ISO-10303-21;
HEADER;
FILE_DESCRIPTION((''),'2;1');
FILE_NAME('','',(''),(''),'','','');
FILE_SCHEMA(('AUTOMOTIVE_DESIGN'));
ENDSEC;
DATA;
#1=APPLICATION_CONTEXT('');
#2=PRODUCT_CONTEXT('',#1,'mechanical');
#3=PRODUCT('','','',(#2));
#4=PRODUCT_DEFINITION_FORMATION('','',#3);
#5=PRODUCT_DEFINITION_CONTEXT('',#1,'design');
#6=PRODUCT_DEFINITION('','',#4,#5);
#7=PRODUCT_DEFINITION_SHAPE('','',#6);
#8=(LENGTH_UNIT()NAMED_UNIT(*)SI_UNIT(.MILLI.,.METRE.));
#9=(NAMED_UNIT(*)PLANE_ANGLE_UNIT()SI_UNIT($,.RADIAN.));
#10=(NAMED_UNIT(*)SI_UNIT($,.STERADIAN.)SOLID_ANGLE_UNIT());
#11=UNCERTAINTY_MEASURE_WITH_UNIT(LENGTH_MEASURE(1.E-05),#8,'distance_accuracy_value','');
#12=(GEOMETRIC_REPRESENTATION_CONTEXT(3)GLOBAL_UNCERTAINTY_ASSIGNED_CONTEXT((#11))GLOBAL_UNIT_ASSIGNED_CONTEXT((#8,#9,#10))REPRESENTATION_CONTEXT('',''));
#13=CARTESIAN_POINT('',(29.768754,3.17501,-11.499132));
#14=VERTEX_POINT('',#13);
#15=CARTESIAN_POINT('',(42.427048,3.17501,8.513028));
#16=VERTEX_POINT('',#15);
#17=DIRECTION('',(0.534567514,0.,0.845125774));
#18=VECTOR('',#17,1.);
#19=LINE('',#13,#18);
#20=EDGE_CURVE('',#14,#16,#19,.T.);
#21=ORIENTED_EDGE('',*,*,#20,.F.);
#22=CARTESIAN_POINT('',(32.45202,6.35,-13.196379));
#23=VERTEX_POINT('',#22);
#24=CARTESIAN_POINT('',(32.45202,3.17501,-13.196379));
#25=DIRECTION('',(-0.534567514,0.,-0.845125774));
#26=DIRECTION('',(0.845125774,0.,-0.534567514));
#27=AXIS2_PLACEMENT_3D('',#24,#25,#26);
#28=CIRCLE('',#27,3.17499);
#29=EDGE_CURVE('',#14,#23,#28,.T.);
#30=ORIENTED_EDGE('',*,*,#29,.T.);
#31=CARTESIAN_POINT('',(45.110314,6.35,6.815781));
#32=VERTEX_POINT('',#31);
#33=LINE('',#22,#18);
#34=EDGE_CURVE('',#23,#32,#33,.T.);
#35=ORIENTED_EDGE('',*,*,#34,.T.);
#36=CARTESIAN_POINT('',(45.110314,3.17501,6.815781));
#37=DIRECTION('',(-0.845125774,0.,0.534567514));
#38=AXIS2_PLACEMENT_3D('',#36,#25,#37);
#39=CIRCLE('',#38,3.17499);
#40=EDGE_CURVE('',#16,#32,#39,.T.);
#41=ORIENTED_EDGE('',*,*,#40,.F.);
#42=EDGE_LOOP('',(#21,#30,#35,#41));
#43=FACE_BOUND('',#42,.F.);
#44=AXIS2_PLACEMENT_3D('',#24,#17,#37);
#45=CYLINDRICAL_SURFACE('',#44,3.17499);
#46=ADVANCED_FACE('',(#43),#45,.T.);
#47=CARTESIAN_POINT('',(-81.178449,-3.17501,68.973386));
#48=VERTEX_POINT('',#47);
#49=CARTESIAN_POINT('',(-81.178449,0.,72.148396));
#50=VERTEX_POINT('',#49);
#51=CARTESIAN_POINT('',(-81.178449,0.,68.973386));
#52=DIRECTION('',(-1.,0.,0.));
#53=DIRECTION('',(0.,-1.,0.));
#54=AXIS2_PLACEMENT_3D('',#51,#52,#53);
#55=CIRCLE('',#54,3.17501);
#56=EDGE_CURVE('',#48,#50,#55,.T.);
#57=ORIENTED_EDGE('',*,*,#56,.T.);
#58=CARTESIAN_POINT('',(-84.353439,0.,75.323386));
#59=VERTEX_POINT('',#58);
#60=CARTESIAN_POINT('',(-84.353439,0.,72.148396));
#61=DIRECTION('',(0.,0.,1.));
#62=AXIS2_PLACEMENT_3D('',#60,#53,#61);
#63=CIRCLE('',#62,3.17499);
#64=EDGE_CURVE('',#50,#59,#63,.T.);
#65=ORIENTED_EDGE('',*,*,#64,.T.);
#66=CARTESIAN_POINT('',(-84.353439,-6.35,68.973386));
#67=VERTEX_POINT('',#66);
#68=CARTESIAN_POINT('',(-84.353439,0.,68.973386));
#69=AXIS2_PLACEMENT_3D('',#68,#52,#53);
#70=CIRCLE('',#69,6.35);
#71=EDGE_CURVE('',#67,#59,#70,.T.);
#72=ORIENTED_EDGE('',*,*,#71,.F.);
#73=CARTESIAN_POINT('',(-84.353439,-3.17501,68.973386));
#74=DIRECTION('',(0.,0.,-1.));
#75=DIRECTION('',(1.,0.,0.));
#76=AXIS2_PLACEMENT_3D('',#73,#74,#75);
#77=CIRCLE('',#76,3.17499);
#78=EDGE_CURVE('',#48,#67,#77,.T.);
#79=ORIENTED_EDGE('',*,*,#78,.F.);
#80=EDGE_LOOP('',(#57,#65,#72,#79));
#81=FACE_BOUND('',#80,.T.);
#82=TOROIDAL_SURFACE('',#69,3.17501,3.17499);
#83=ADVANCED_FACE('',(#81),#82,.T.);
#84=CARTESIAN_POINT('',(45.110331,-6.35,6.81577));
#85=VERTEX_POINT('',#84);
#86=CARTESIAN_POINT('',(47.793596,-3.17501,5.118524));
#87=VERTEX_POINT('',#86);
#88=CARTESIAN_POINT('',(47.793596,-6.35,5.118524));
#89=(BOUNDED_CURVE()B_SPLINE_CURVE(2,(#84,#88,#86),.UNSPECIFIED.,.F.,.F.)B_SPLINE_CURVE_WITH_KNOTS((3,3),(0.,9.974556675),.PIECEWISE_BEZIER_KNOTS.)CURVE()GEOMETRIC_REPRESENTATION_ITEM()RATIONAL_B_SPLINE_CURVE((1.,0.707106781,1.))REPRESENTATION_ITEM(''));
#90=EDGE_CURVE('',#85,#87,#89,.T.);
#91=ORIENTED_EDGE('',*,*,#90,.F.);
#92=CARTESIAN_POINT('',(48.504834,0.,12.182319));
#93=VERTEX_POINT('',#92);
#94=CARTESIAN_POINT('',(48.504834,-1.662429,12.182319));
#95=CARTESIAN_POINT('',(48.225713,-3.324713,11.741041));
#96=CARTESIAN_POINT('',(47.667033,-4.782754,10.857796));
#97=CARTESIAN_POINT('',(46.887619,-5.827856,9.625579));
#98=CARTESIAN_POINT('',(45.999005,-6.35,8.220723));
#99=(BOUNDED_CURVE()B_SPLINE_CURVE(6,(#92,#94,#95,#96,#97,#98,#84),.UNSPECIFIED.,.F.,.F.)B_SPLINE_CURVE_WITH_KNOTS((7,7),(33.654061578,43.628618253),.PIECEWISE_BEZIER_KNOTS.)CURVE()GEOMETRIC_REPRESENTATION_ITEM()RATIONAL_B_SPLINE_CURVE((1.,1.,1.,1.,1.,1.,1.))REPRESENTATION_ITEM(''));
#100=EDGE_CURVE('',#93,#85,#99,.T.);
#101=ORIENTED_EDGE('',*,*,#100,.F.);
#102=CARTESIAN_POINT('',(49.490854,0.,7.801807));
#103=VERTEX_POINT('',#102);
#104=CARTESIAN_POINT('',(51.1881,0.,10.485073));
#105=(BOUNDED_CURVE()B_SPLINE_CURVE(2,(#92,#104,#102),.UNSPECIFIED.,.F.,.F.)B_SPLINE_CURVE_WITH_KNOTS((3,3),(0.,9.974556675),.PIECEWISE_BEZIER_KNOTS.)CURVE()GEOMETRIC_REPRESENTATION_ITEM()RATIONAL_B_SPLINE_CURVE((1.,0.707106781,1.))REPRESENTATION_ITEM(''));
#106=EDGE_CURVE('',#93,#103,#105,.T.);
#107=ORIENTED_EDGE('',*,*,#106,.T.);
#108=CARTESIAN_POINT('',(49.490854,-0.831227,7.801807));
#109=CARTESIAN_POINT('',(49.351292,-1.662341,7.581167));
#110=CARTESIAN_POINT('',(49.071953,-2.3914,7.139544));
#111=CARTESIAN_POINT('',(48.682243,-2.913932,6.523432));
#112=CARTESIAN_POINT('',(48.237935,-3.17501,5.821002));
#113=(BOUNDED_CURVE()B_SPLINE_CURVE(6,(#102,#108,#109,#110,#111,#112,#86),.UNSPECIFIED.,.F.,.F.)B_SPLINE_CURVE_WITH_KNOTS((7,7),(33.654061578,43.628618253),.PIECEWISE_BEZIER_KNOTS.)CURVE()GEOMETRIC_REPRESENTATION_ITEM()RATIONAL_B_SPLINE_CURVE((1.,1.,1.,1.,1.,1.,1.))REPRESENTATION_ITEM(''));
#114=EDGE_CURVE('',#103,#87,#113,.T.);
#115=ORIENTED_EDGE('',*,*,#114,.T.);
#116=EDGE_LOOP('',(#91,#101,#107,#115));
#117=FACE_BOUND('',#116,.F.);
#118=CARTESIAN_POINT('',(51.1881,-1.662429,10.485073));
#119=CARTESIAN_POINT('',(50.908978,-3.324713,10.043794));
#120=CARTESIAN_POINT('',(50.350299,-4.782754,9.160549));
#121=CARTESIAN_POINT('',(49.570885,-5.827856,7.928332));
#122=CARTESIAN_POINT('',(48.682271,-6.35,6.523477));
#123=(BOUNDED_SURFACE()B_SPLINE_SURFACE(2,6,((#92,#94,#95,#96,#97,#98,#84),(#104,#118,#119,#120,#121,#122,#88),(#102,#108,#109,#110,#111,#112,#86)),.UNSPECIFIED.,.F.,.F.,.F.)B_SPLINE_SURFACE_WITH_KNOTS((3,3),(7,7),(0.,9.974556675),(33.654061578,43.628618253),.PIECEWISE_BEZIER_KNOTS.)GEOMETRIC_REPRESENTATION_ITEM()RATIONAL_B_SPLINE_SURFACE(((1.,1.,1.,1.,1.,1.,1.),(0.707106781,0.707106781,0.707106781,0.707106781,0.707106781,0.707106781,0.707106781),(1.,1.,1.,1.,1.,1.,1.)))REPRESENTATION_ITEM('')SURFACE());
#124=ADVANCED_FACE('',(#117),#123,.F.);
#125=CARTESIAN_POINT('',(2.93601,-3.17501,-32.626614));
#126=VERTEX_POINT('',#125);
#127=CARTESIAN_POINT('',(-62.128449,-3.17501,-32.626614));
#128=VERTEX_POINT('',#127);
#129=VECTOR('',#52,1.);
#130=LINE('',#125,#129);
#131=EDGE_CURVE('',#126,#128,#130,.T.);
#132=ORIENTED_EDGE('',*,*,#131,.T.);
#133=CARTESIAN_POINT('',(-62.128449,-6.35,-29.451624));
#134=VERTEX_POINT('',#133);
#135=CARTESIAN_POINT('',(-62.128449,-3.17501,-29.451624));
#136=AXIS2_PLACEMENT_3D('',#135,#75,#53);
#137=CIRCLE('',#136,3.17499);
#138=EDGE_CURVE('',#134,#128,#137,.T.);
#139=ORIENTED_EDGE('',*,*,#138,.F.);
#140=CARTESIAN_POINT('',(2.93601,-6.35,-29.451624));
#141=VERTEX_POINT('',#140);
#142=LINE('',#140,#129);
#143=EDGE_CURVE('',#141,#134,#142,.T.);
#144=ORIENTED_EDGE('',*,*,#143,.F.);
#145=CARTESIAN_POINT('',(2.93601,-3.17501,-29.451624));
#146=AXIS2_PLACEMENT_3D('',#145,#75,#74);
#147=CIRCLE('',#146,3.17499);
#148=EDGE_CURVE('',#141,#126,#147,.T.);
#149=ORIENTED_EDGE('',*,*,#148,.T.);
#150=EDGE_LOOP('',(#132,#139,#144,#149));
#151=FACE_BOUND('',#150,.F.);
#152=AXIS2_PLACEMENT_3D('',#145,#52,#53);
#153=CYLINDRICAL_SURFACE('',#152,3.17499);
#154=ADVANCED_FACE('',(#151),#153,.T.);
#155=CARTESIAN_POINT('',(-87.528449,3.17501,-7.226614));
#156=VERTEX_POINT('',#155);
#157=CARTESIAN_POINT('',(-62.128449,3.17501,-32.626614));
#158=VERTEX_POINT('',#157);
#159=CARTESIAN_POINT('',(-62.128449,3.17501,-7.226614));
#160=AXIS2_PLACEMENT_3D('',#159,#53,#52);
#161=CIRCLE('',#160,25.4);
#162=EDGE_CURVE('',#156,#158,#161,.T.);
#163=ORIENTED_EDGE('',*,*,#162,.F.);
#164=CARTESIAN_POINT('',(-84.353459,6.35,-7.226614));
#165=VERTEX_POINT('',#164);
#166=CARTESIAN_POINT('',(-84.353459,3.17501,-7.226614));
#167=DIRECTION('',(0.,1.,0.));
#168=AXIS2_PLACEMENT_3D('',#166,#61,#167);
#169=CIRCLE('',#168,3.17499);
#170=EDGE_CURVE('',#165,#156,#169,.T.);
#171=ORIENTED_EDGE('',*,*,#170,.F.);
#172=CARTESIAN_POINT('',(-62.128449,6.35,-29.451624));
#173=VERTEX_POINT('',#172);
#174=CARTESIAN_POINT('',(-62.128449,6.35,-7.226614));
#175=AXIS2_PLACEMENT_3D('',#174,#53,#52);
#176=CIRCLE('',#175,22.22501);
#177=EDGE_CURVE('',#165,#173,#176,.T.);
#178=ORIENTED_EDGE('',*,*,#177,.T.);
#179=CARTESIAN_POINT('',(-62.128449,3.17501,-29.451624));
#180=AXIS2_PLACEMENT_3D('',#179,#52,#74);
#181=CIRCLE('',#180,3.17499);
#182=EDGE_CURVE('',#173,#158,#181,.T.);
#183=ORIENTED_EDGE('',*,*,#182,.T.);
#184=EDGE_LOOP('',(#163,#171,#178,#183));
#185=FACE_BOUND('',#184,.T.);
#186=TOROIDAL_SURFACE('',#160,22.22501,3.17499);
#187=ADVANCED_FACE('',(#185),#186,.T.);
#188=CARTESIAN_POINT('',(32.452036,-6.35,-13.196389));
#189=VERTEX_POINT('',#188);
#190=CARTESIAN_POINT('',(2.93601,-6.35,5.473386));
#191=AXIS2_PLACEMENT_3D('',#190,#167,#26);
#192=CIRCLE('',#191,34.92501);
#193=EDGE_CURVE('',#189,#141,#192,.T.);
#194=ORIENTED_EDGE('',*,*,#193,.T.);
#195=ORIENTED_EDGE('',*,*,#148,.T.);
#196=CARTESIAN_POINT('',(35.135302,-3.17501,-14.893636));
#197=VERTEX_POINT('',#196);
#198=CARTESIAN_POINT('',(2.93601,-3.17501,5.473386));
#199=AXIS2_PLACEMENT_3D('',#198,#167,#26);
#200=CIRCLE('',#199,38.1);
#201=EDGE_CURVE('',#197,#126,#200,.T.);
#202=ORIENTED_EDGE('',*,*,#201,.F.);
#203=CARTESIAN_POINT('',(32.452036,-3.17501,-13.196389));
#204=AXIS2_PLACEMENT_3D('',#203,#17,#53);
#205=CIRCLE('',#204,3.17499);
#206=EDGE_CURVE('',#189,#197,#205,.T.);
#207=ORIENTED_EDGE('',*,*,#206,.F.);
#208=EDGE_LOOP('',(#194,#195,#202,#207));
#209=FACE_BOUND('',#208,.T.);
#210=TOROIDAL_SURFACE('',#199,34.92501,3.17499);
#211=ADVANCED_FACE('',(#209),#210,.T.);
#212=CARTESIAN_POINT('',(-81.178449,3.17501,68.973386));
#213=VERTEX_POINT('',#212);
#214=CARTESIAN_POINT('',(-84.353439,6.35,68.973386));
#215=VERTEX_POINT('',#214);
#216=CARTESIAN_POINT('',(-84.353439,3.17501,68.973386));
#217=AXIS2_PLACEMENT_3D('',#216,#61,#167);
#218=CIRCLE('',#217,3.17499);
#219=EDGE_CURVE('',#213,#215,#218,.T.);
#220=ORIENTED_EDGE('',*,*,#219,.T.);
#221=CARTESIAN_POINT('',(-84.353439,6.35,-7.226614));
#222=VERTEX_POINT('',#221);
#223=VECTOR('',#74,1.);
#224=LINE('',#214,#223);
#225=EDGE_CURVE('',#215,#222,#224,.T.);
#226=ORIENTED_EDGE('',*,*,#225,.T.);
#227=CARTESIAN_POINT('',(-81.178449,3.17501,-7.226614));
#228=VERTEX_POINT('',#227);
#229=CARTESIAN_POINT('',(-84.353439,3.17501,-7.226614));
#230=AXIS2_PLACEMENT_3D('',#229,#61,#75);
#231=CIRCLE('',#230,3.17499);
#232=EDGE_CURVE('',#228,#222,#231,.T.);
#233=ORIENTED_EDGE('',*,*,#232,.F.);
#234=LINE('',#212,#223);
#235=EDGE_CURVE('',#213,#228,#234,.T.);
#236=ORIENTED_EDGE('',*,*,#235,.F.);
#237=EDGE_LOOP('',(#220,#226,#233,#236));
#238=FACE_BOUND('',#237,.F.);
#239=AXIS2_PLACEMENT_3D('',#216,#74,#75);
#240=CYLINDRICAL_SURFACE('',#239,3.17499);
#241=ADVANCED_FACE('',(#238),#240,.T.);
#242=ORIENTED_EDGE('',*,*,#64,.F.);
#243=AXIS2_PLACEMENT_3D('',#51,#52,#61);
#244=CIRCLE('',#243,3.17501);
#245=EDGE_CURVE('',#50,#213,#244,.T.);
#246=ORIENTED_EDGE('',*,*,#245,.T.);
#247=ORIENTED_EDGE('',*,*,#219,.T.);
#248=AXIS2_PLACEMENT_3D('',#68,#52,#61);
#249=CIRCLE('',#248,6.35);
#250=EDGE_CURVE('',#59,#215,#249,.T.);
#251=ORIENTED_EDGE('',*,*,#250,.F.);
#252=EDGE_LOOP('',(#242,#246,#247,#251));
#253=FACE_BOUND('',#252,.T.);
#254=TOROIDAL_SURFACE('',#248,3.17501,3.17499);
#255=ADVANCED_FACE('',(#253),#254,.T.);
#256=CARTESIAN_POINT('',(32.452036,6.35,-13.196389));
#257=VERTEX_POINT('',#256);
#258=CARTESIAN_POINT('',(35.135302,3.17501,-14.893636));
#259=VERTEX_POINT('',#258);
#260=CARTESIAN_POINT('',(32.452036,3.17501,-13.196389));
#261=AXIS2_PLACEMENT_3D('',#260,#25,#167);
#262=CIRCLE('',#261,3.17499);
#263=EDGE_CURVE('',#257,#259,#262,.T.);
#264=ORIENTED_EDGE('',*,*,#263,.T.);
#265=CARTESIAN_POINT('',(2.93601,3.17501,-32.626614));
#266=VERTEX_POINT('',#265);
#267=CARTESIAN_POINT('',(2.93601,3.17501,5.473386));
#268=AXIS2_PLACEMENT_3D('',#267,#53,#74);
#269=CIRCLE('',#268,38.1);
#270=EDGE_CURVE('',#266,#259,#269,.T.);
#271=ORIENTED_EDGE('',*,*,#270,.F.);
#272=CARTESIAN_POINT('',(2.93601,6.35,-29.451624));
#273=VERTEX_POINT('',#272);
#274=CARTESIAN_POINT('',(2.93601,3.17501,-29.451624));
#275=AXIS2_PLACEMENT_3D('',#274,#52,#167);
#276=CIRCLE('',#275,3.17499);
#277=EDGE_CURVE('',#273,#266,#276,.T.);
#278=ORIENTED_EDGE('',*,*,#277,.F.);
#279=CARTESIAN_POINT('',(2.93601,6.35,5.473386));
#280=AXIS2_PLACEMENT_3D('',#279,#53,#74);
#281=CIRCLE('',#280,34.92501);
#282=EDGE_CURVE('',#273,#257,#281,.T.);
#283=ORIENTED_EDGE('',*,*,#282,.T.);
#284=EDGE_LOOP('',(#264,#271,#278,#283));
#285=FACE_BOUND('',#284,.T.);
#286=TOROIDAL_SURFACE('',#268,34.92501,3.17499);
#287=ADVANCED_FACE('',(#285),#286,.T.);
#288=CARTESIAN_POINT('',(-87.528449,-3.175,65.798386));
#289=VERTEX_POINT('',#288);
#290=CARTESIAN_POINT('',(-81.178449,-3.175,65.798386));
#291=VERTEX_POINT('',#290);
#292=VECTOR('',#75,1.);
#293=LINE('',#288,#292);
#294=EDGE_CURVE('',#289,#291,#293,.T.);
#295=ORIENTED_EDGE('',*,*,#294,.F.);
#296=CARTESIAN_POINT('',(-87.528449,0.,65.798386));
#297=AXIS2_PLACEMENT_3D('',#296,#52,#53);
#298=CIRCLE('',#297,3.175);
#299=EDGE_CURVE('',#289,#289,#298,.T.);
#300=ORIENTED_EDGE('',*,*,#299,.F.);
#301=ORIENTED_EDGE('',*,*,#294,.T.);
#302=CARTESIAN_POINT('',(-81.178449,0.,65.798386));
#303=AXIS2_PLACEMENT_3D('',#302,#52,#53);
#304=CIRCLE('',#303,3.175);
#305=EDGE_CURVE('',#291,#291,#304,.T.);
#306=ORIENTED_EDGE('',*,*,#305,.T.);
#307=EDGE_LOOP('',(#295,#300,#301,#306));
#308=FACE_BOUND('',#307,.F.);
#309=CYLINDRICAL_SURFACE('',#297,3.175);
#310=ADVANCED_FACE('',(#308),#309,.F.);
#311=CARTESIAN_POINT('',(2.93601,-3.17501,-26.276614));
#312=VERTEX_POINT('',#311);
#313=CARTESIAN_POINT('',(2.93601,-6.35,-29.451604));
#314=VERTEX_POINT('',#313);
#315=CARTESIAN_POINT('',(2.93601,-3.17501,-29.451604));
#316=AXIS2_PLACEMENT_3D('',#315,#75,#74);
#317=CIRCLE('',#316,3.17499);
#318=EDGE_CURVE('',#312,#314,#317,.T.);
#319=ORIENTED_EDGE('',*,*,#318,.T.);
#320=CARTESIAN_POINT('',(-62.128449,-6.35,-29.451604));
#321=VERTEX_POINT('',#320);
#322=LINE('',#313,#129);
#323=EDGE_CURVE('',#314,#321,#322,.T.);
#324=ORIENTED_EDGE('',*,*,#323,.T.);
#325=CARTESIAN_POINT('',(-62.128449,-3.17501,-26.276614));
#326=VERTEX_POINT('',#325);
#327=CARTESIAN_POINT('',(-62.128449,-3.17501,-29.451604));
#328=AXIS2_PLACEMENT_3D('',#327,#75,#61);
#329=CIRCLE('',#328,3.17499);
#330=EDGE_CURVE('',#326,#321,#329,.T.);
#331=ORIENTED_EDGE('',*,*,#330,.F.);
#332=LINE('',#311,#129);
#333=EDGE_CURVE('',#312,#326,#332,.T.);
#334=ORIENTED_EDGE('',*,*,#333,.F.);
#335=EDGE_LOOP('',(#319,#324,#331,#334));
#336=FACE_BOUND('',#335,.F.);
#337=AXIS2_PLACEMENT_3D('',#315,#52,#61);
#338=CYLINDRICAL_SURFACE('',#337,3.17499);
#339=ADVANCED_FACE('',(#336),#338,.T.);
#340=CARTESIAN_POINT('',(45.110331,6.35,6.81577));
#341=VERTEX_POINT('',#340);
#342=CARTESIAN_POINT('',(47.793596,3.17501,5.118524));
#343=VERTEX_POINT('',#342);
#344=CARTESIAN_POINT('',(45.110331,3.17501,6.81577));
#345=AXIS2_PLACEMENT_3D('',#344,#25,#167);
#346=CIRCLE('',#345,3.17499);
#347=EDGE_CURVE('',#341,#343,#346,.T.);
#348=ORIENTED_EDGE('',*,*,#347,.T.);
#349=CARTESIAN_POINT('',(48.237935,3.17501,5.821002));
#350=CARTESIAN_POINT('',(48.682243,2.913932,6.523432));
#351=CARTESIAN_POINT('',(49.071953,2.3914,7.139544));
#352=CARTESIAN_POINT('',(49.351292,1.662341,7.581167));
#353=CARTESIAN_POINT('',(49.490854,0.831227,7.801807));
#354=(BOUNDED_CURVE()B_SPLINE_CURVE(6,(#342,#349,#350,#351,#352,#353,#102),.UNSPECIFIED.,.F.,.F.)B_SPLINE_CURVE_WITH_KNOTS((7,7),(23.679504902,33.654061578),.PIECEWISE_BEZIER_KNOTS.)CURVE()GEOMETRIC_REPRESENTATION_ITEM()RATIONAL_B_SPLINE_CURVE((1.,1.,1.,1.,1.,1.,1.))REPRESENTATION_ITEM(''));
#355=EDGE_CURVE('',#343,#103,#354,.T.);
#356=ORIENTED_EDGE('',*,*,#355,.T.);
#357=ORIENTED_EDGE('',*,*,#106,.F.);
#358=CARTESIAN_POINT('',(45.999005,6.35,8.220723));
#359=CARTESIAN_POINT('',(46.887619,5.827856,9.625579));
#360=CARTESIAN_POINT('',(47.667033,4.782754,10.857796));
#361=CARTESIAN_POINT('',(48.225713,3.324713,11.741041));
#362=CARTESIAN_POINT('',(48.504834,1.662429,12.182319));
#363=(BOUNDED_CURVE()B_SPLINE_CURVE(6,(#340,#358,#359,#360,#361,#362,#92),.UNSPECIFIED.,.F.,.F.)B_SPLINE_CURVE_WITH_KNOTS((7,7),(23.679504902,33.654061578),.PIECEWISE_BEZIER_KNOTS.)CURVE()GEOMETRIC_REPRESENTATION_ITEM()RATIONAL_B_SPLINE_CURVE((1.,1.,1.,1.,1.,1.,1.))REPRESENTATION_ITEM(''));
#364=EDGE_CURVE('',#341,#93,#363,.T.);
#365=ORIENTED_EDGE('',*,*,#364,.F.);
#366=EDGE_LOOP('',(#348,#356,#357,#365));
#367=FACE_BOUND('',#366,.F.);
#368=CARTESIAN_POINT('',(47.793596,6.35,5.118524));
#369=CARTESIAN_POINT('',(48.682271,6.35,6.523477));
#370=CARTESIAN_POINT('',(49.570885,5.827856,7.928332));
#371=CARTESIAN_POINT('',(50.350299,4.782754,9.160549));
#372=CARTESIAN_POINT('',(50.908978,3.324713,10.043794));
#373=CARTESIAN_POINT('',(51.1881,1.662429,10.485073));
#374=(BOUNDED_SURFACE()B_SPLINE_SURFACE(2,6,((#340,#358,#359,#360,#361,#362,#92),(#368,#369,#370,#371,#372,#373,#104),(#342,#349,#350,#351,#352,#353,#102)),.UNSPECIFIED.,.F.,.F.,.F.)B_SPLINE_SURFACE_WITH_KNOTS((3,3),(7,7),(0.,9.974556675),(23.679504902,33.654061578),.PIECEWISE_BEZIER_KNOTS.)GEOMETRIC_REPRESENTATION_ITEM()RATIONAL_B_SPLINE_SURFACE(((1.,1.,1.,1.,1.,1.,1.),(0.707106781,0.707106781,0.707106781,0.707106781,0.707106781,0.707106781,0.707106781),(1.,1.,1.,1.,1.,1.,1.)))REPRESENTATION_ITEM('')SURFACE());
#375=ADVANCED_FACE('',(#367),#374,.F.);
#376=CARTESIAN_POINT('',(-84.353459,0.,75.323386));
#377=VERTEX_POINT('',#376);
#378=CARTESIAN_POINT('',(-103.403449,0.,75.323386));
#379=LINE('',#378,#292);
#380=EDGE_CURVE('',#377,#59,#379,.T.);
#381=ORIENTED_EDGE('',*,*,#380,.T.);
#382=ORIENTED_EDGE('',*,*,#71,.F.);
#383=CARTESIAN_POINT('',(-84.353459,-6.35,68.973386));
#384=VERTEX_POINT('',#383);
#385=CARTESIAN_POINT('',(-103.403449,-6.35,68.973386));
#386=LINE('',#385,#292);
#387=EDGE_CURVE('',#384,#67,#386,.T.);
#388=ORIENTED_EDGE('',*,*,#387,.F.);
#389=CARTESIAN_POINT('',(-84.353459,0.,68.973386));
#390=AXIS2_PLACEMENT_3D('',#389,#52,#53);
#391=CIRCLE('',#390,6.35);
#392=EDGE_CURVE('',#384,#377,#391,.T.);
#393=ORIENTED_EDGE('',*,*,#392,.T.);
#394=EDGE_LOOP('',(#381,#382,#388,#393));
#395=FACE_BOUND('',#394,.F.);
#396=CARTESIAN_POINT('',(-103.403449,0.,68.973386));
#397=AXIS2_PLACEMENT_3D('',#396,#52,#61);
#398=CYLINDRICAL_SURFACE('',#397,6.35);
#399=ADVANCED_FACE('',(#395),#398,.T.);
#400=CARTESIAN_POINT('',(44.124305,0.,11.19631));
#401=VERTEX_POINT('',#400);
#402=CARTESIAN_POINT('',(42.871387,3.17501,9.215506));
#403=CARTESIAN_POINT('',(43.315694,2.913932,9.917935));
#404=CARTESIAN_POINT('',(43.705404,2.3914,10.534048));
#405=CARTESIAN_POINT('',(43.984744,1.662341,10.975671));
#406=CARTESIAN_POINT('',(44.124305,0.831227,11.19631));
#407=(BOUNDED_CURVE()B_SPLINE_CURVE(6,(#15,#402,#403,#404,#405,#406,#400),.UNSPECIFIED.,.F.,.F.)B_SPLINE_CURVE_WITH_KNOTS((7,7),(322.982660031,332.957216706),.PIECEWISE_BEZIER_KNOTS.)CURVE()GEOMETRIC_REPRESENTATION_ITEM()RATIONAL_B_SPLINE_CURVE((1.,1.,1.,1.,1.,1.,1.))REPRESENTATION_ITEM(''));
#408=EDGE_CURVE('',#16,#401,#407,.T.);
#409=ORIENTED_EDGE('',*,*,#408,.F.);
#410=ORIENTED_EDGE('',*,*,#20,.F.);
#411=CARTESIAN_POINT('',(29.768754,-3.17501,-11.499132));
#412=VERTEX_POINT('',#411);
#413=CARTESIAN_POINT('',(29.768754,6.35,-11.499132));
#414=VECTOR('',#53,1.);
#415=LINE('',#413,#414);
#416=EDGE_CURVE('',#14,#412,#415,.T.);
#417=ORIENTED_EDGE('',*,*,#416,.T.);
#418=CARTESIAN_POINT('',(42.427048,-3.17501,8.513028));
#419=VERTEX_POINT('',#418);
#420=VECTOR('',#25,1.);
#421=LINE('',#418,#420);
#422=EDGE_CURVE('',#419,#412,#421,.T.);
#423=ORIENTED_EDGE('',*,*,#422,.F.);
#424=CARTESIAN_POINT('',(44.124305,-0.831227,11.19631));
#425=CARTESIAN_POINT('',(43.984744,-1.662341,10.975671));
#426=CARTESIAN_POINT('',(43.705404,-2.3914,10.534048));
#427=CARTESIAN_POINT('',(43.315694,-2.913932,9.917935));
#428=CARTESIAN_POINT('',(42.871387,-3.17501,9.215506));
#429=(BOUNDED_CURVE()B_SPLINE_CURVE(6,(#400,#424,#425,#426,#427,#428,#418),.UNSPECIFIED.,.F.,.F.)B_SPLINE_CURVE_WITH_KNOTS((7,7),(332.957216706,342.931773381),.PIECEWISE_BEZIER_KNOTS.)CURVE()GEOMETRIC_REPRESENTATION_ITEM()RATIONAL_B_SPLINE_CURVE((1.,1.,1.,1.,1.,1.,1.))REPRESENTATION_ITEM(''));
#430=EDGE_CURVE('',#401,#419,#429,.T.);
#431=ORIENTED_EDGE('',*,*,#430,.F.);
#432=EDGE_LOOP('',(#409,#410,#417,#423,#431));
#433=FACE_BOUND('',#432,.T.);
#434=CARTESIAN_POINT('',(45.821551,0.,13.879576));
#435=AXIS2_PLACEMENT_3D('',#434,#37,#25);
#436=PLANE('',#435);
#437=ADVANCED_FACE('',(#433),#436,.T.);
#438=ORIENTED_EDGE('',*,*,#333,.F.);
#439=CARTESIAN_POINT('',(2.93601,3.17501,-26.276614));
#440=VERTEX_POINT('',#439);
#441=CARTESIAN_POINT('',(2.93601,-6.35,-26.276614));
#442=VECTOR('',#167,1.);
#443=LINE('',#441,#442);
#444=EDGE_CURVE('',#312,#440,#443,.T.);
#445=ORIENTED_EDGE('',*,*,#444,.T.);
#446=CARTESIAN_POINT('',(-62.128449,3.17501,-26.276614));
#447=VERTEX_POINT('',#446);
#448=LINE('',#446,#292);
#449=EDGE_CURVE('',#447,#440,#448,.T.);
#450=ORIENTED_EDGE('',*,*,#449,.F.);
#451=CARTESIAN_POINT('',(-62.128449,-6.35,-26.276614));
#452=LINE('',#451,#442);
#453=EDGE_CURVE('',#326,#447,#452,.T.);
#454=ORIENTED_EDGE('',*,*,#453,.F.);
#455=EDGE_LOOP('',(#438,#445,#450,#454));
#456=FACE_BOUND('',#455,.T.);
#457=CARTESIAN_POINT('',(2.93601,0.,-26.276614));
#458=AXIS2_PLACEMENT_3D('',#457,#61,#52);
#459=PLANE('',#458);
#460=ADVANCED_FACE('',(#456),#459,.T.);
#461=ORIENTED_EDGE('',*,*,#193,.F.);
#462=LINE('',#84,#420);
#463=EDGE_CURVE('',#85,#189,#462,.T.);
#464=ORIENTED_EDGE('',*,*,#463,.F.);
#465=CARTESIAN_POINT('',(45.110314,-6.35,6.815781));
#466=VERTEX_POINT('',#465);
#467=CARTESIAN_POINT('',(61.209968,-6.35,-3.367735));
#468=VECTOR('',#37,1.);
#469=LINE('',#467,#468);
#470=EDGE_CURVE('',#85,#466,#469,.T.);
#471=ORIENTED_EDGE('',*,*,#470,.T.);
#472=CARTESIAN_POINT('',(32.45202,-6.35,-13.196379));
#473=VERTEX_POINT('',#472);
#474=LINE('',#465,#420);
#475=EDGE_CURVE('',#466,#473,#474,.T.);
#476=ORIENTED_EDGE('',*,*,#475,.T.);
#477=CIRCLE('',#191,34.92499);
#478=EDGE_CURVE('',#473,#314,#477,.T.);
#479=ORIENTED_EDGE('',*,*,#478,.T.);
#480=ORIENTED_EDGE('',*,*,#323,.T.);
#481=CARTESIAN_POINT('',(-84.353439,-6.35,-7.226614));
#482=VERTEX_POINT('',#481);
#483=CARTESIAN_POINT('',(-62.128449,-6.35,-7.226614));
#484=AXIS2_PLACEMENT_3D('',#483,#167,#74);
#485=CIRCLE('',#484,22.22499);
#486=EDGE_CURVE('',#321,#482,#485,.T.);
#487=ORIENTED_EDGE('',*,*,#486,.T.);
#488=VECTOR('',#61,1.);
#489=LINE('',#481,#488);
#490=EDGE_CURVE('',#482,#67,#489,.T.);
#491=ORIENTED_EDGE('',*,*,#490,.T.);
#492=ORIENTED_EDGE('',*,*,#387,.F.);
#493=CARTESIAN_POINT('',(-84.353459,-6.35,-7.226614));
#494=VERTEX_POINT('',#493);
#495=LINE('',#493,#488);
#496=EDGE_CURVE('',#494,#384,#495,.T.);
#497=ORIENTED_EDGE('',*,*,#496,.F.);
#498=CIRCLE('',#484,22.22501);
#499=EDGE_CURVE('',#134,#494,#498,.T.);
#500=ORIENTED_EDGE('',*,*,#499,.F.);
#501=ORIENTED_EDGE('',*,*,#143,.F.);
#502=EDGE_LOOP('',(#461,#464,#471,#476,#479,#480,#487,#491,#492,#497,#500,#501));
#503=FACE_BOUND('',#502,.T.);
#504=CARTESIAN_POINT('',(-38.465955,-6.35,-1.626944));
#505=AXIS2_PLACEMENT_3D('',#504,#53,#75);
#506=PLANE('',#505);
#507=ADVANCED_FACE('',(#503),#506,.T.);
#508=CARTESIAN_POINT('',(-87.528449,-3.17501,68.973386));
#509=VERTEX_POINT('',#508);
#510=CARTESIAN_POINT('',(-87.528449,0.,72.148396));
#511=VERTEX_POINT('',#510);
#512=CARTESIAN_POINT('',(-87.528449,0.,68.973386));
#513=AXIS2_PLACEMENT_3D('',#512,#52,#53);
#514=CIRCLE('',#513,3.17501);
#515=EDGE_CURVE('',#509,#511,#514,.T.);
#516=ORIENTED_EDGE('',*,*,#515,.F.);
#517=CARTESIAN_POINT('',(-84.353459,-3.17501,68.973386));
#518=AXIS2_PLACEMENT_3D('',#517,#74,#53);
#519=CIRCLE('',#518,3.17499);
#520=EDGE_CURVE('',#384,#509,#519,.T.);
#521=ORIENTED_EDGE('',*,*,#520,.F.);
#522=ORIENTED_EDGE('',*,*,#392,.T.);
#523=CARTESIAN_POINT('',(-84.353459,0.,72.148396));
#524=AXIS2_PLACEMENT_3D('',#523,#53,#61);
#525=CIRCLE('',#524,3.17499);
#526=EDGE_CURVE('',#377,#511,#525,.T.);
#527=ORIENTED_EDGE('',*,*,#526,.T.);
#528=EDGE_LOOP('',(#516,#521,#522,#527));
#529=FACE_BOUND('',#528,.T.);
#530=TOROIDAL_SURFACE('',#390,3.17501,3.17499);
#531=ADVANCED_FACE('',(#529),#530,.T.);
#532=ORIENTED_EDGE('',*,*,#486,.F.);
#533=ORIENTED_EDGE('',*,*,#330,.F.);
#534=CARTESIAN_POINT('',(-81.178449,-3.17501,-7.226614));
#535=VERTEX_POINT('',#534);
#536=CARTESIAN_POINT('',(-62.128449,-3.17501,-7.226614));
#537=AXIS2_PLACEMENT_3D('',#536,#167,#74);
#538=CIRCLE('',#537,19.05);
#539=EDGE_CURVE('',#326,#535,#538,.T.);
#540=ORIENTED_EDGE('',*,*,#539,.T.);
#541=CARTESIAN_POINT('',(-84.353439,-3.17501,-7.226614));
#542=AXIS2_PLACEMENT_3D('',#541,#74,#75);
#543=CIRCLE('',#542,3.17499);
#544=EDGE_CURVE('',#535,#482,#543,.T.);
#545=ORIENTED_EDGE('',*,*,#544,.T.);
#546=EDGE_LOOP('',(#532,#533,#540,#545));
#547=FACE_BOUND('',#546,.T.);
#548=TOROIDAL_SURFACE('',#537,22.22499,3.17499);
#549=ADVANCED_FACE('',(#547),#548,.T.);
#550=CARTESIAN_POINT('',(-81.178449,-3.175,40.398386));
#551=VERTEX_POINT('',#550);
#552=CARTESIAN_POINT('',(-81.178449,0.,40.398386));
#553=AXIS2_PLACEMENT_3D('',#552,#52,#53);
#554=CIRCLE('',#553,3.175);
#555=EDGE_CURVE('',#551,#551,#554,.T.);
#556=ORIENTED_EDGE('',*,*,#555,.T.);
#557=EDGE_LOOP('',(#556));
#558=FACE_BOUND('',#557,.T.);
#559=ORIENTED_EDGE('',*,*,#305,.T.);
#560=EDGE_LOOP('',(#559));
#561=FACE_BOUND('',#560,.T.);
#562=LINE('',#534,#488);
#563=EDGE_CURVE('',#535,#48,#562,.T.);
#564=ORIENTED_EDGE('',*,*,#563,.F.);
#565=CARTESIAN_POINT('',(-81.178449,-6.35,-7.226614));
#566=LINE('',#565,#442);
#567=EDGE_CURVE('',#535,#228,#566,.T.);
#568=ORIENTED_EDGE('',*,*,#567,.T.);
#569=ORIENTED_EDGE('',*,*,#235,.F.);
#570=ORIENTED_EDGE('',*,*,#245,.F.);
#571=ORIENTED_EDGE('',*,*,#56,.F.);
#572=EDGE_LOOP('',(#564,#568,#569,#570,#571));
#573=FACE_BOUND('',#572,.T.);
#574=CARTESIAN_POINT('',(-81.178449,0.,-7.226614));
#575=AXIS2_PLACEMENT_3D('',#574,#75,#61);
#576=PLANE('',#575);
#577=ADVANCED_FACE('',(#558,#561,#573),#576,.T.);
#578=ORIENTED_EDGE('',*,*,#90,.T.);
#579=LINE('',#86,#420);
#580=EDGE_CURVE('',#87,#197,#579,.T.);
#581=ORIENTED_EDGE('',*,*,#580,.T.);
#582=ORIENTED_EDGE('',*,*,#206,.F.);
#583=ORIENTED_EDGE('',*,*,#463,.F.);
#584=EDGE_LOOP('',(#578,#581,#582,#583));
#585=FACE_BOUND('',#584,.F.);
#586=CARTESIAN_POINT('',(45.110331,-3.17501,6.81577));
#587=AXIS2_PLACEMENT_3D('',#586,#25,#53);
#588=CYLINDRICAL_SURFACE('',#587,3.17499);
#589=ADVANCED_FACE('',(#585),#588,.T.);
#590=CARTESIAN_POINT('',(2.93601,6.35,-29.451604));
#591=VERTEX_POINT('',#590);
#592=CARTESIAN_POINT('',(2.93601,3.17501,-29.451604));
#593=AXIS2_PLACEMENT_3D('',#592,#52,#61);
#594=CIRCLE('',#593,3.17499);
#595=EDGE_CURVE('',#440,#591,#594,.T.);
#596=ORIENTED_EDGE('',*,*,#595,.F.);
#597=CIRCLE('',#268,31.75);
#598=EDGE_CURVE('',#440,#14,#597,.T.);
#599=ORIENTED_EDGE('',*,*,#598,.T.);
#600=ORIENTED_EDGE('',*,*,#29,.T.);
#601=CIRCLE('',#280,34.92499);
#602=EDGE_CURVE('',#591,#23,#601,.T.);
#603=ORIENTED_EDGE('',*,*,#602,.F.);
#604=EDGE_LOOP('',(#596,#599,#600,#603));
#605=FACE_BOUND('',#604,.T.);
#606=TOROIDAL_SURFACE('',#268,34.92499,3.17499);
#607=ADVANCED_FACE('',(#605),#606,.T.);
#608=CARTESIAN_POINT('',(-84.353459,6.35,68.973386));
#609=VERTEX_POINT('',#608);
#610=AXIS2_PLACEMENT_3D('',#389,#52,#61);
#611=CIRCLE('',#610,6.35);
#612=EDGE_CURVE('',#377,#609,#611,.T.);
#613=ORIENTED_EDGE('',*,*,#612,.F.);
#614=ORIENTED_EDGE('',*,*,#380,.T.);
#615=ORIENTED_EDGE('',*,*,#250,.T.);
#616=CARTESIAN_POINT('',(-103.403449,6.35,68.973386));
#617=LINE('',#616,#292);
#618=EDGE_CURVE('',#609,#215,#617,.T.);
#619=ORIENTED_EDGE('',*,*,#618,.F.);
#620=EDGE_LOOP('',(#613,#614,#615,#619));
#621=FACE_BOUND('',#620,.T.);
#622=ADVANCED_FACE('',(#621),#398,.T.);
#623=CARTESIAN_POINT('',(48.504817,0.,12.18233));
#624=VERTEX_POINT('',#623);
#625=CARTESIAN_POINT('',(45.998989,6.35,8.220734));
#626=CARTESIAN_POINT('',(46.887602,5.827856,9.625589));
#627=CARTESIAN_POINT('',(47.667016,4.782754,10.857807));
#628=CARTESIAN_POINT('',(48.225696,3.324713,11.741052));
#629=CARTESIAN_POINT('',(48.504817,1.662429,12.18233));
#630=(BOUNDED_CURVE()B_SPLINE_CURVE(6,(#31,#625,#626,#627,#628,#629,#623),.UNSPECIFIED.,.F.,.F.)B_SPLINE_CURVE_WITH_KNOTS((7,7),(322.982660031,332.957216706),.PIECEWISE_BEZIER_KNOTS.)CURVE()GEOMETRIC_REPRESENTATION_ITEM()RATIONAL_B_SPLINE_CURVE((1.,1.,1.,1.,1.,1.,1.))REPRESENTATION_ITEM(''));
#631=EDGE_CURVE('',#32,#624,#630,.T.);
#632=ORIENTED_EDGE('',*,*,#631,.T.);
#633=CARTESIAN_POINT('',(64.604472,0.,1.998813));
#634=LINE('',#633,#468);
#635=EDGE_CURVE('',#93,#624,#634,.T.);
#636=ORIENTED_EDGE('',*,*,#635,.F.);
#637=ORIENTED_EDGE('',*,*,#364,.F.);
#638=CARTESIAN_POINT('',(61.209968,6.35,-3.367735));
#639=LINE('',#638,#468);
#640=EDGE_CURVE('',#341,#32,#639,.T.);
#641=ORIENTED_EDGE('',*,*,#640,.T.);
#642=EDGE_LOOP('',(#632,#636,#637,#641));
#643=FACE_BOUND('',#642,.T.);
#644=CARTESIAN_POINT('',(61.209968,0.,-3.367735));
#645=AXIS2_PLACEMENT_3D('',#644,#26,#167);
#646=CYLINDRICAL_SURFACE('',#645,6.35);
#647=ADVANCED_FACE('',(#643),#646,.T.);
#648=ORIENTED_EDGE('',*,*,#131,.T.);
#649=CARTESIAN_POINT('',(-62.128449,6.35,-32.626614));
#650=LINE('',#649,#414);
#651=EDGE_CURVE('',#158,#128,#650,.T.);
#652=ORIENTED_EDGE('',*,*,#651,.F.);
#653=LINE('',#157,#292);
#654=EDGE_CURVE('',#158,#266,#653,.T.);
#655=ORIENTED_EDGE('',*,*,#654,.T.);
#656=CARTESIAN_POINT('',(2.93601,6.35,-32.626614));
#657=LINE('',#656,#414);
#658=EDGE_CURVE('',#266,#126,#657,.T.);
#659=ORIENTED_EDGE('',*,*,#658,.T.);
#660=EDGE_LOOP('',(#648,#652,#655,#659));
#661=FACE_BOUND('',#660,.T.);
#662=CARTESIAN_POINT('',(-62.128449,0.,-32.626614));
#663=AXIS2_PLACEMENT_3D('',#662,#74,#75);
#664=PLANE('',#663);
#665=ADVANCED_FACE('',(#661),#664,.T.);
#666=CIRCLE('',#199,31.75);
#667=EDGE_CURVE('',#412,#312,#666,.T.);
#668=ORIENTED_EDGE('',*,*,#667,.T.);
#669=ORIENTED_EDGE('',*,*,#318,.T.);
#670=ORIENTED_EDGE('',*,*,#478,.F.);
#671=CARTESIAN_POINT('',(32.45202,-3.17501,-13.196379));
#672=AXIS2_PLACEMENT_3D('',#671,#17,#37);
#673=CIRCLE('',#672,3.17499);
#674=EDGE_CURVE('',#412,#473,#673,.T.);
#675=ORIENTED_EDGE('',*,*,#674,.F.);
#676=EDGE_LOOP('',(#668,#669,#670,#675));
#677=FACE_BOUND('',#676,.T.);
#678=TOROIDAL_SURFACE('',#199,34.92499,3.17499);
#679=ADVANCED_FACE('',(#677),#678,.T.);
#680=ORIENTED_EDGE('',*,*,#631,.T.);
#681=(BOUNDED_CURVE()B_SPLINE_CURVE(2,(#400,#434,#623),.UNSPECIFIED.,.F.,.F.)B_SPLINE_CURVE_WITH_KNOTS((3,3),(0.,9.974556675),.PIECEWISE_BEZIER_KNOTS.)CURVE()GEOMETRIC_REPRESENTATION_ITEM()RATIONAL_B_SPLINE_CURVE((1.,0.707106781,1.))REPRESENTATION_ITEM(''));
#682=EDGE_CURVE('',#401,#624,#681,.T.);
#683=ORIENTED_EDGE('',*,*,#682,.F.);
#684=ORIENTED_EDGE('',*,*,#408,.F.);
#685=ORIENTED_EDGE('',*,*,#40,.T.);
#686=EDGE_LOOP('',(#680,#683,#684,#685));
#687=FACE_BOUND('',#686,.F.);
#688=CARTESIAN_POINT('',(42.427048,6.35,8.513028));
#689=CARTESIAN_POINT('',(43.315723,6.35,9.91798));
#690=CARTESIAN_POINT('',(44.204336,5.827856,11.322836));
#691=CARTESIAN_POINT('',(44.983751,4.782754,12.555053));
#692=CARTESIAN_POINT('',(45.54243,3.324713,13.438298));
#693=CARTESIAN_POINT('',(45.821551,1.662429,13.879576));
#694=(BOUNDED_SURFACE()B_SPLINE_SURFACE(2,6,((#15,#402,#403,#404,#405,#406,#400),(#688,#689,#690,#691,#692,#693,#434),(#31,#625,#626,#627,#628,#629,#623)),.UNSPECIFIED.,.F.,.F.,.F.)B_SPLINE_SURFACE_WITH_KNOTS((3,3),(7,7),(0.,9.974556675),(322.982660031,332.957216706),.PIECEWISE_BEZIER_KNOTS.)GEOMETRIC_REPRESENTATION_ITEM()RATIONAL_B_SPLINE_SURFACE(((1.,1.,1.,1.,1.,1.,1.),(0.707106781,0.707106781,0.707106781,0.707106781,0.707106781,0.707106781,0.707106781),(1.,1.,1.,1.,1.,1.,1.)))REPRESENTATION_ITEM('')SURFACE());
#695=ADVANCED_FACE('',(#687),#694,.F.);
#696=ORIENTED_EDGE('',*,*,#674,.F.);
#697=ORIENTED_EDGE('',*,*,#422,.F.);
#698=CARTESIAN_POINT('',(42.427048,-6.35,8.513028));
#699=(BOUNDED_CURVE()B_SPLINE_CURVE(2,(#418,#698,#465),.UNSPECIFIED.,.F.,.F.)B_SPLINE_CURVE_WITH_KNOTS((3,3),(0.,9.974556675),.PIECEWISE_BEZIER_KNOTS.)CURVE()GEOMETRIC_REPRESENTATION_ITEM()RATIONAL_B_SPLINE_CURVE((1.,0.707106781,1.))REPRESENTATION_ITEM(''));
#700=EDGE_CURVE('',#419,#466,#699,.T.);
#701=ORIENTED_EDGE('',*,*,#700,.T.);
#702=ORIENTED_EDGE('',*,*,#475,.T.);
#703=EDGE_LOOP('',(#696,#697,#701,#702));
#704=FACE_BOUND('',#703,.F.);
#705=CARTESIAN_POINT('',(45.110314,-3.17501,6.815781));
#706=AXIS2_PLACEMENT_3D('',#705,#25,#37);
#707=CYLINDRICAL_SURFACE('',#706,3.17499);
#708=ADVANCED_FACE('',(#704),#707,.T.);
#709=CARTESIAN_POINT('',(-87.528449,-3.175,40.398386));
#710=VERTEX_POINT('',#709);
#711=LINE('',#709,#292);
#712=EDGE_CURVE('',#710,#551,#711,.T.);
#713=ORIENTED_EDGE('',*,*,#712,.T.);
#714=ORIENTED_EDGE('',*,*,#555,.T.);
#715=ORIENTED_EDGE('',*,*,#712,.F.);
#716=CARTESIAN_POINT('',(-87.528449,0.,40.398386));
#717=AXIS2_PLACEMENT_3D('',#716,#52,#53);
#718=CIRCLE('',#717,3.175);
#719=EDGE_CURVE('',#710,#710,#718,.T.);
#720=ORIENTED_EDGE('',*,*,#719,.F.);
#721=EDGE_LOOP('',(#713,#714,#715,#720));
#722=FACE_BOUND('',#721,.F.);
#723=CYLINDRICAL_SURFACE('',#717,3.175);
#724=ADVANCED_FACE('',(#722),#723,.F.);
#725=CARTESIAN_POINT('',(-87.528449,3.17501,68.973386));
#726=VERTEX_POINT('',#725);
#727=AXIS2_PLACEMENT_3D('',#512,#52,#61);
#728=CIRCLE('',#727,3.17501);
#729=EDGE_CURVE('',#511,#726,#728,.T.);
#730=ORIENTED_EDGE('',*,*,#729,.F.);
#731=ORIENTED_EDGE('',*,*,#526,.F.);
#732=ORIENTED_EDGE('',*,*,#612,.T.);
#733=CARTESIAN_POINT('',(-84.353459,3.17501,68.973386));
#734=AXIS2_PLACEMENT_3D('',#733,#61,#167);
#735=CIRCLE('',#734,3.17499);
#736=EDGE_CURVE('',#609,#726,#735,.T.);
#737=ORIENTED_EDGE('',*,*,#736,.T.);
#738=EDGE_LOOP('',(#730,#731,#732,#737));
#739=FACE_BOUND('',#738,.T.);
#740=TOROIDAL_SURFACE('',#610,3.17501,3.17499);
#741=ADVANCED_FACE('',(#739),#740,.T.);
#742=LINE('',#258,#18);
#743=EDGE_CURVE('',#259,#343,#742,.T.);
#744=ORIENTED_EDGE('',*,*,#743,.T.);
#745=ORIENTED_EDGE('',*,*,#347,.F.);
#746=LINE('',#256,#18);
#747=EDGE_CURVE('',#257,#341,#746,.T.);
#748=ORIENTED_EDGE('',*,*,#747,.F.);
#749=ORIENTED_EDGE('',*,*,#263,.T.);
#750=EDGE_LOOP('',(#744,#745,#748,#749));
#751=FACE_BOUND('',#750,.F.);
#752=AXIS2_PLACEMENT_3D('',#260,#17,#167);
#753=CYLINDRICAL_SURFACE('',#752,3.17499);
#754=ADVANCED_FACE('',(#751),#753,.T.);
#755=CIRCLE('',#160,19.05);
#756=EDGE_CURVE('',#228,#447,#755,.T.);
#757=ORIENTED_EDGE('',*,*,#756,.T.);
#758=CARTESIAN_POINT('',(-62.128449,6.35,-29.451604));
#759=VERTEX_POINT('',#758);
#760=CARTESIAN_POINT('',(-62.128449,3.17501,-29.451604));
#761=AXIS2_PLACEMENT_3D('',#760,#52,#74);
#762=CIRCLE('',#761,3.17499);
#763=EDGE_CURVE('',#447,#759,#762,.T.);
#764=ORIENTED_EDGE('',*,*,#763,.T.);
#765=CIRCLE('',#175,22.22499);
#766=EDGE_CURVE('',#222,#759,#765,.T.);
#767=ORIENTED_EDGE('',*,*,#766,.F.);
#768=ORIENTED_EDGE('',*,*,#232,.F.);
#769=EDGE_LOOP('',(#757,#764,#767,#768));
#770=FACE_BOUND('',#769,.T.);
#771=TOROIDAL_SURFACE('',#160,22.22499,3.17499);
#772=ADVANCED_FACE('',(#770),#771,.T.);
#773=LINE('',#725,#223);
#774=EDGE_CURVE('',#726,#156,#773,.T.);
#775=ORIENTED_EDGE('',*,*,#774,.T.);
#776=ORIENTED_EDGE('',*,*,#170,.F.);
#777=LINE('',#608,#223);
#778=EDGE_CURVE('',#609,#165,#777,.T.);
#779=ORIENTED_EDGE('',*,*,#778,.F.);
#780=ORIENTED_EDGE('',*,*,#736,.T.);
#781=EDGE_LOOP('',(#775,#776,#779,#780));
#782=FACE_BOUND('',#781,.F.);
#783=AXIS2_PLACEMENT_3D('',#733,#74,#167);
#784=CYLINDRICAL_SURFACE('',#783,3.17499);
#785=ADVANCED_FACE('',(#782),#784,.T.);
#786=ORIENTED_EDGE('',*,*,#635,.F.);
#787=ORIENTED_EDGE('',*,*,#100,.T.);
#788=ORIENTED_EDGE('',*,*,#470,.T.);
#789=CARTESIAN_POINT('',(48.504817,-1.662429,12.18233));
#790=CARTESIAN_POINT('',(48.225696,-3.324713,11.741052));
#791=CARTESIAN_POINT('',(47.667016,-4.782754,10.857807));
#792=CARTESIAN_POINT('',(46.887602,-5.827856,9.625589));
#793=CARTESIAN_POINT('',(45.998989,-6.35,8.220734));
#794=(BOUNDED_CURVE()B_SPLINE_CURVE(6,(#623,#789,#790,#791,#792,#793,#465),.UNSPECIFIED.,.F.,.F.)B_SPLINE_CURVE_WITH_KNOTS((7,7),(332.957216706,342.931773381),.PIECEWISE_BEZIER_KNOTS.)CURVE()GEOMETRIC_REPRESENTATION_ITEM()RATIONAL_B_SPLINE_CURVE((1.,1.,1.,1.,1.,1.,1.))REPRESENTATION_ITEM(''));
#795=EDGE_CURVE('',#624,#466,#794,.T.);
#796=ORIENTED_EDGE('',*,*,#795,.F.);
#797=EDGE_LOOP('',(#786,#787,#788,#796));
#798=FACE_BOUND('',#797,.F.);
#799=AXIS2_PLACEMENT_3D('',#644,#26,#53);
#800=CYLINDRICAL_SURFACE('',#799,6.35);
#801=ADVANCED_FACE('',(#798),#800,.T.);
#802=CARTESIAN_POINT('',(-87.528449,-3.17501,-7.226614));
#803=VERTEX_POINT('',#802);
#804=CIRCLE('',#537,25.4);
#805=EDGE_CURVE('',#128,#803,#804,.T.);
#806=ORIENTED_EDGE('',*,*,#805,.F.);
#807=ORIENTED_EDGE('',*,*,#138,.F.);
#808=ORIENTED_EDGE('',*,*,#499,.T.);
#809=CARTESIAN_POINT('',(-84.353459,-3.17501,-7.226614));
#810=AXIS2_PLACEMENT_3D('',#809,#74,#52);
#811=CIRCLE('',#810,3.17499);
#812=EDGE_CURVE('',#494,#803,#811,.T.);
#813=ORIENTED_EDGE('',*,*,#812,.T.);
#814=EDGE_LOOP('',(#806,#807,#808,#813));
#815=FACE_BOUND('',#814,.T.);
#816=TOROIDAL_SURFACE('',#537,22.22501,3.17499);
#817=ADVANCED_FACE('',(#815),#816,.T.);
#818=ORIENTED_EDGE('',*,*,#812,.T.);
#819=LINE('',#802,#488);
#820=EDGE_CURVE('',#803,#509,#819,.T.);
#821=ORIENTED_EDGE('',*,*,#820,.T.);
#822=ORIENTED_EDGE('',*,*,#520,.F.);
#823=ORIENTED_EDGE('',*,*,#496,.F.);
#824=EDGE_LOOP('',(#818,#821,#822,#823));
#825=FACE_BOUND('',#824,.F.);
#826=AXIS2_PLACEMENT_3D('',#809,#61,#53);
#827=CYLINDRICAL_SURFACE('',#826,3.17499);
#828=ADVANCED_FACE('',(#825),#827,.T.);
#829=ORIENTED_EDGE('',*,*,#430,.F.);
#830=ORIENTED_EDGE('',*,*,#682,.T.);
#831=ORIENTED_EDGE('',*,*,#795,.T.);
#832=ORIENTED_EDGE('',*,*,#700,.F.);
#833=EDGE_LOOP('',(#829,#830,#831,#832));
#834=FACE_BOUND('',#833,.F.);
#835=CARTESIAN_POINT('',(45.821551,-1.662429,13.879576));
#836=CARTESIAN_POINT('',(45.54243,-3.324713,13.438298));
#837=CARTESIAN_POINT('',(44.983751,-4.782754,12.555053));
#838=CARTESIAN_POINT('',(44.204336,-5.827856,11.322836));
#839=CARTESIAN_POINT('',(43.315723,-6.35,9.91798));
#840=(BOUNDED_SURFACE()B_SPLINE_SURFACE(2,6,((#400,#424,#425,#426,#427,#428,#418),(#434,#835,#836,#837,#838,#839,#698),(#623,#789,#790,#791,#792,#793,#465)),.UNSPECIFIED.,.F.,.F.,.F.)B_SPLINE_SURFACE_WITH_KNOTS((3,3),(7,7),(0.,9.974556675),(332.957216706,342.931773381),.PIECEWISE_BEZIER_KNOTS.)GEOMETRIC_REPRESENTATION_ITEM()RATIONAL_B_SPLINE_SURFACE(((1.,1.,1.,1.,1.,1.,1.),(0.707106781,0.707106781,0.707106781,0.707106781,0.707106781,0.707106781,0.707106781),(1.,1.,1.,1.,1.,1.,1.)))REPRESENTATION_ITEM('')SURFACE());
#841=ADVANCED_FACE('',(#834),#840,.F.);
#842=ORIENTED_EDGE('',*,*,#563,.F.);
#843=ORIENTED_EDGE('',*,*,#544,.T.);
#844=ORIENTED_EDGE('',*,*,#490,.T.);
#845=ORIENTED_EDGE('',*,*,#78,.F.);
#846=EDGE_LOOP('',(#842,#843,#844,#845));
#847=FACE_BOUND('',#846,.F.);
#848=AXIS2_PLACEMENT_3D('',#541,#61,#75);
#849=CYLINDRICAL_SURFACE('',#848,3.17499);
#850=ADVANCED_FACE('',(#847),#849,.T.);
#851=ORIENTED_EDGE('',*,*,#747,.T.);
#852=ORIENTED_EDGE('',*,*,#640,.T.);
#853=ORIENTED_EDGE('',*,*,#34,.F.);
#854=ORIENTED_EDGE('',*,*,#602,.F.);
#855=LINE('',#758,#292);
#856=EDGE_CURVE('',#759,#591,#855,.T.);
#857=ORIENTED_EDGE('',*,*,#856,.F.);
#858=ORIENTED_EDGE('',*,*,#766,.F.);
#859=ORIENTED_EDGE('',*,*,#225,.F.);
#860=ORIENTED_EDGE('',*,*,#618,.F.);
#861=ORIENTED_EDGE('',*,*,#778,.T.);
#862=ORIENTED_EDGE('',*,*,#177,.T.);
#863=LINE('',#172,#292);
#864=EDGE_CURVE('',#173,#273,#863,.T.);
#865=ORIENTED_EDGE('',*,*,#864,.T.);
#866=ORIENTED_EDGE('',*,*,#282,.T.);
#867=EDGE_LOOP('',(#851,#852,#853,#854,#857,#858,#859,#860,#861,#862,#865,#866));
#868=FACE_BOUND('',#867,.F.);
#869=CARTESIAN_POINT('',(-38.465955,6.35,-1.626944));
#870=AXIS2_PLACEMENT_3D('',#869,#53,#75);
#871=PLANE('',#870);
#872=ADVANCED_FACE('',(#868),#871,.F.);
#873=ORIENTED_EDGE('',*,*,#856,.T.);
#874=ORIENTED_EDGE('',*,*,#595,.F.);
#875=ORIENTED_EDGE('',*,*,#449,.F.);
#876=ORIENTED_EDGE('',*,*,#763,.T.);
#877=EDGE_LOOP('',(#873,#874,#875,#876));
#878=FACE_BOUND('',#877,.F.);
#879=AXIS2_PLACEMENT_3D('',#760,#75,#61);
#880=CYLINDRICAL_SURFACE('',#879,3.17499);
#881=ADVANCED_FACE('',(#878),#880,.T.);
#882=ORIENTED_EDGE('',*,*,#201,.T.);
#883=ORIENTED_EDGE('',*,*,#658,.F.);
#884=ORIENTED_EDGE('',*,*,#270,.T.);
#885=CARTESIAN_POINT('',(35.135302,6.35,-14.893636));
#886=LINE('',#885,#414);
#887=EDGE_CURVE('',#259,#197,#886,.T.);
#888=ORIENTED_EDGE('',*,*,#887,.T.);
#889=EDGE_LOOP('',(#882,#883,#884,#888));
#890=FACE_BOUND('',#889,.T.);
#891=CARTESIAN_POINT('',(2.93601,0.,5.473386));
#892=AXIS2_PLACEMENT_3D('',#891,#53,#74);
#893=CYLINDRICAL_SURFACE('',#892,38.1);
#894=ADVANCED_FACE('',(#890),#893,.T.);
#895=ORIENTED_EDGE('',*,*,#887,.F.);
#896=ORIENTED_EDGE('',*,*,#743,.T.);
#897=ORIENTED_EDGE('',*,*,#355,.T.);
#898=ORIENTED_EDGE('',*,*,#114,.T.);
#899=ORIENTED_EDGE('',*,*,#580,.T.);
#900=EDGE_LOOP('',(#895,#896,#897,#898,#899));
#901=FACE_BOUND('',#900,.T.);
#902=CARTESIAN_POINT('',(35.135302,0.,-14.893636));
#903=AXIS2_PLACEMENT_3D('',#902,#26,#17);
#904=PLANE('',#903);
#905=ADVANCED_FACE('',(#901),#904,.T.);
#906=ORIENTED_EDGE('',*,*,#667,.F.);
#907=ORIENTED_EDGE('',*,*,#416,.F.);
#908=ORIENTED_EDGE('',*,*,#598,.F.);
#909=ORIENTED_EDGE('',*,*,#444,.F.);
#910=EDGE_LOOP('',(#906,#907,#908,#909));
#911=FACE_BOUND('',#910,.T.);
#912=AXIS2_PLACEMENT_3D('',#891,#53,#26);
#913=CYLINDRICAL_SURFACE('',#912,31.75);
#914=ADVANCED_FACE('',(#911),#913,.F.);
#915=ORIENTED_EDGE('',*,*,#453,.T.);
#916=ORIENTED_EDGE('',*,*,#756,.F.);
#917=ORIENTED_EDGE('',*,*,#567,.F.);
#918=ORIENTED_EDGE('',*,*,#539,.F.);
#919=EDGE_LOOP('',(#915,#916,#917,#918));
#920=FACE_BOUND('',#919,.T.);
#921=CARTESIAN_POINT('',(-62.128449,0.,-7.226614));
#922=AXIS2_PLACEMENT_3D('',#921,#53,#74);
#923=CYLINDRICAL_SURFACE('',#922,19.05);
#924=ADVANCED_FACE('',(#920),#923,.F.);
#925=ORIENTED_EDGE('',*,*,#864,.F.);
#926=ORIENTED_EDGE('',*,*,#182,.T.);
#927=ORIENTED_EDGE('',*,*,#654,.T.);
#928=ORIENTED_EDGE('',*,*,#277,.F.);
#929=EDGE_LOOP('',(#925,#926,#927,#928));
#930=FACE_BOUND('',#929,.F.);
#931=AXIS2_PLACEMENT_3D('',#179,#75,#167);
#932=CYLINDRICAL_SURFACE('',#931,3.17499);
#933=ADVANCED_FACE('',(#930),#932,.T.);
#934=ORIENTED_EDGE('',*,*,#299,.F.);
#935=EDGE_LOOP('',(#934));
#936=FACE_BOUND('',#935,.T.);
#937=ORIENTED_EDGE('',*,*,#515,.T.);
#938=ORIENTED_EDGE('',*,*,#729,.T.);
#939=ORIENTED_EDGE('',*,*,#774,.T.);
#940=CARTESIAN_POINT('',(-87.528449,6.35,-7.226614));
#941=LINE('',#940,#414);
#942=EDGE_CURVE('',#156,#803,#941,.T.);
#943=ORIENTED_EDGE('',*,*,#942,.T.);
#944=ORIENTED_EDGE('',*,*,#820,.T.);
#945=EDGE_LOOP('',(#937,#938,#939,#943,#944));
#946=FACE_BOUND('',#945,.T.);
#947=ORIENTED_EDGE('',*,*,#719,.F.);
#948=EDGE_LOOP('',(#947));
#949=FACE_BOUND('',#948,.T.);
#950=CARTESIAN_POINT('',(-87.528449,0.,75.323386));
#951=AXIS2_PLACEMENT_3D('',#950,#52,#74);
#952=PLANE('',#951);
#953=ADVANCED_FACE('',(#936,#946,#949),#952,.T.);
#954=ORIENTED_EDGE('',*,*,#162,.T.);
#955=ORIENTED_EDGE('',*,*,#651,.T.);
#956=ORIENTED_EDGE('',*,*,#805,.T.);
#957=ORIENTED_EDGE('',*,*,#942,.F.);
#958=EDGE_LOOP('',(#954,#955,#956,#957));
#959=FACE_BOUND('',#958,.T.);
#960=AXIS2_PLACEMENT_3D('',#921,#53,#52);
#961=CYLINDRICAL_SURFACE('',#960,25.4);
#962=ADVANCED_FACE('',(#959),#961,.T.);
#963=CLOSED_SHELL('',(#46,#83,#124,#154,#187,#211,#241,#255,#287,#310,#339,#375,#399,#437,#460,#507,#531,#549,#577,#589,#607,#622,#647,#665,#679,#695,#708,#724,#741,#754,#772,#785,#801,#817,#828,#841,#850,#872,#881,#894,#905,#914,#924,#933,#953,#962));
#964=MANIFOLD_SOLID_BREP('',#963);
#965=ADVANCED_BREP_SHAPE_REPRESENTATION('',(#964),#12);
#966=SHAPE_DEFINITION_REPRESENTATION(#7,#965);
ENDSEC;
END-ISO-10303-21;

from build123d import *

# Parameters (mm, degrees)
F1_DEPTH    = 6.35
F2_T1_DEPTH = 38.1
F3_T1_DEPTH = 38.1
F5_R        = 3.17499
F6_R        = 3.175
F7_DEPTH    = 25.4


# Not quite as in the source:
# - a fillet or chamfer that OpenCascade refuses, or shapes differently, is made with other operations: its cross-section is extruded or revolved along the edge and cut away or added
# - a fillet or chamfer is up to 0.001 mm smaller than in the source, because OpenCascade refuses the exact size
# - a feature of the source that left no trace in its solid (it failed there, or was rolled back) is left out


with BuildPart() as f1:
    # F0 (on Front) → F1 (new body, symmetric)
    with BuildSketch(Plane.XZ):
        with BuildLine():
            Line((-81.1784485418, -7.2266137339), (-81.1784485418, 75.3233862661))
            Line((-81.1784485418, 75.3233862661), (-87.5284485418, 75.3233862661))
            Line((-87.5284485418, 75.3233862661), (-87.5284485418, -7.2266137339))
            ThreePointArc((-87.5284485418, -7.2266137339), (-80.0889607839, -25.1871259761), (-62.1284485418, -32.6266137339))
            Line((-62.1284485418, -32.6266137339), (2.9360103709, -32.6266137339))
            ThreePointArc((2.9360103709, -32.6266137339), (21.3157063883, -27.9002077014), (35.1353023462, -14.8936360074))
            Line((35.1353023462, -14.8936360074), (51.1881001208, 10.4850725552))
            Line((51.1881001208, 10.4850725552), (45.8215514582, 13.8795762674))
            Line((45.8215514582, 13.8795762674), (29.7687536837, -11.4991322951))
            ThreePointArc((29.7687536837, -11.4991322951), (18.2524237187, -22.3379420402), (2.9360103709, -26.2766137339))
            Line((2.9360103709, -26.2766137339), (-62.1284485418, -26.2766137339))
            ThreePointArc((-62.1284485418, -26.2766137339), (-75.5988327234, -20.6969979155), (-81.1784485418, -7.2266137339))
        make_face()
    extrude(amount=F1_DEPTH, both=True)

    # F2: fillet of radius 6.35 on 2 edges, made by hand

    # F2_s2 → F2_t1 (cut)
    with BuildSketch(Plane.YZ.offset(-103.4034485418)):
        with BuildLine():
            ThreePointArc((0, 75.3233862661), (4.4901280605, 73.4635143266), (6.35, 68.9733862661))
            Line((6.35, 68.9733862661), (6.35, 75.3233862661))
            Line((6.35, 75.3233862661), (0, 75.3233862661))
        make_face()
        with BuildLine():
            ThreePointArc((0, 75.3233862661), (-4.4901280605, 73.4635143266), (-6.35, 68.9733862661))
            Line((-6.35, 68.9733862661), (-6.35, 75.3233862661))
            Line((-6.35, 75.3233862661), (0, 75.3233862661))
        make_face()
    extrude(amount=F2_T1_DEPTH, mode=Mode.SUBTRACT)

    # F3: fillet of radius 6.35 on 2 edges, made by hand

    # F3_s2 → F3_t1 (cut)
    with BuildSketch(Plane(origin=(45.2399237114, 0, -28.6156147341), x_dir=(0, 1, 0), z_dir=(-0.8451257736, 0, 0.5345675137))):
        with BuildLine():
            ThreePointArc((-6.35, -29.8747004693), (-4.4901280605, -34.3648285299), (0, -36.2247004693))
            Line((0, -36.2247004693), (-6.35, -36.2247004693))
            Line((-6.35, -36.2247004693), (-6.35, -29.8747004693))
        make_face()
        with BuildLine():
            ThreePointArc((6.35, -29.8747004693), (4.4901280605, -34.3648285299), (0, -36.2247004693))
            Line((0, -36.2247004693), (6.35, -36.2247004693))
            Line((6.35, -36.2247004693), (6.35, -29.8747004693))
        make_face()
    extrude(amount=F3_T1_DEPTH, mode=Mode.SUBTRACT)

    # F5 (radius 3.175 in the source; OpenCascade refuses exactly that, so slightly less here)
    f5_edges = [f1.edges().sort_by_distance(p)[0] for p in [
        (-81.178449, -6.35, 30.873386),
        (18.252424, 6.35, -22.337942),
        (18.252424, -6.35, -22.337942),
        (41.464449, 6.35, -4.887556),
        (21.315706, 6.35, -27.900208),
        (-29.596219, 6.35, -32.626614),
        (-80.088961, 6.35, -25.187126),
        (-87.528449, 6.35, 30.873386),
        (-81.178449, 6.35, 30.873386),
        (-75.598833, 6.35, -20.696998),
        (-29.596219, 6.35, -26.276614),
        (36.097901, 6.35, -1.493052),
        (-29.596219, -6.35, -26.276614),
        (41.464449, -6.35, -4.887556),
        (21.315706, -6.35, -27.900208),
        (-29.596219, -6.35, -32.626614),
        (-80.088961, -6.35, -25.187126),
        (-87.528449, -6.35, 30.873386),
        (-75.598833, -6.35, -20.696998),
        (36.097901, -6.35, -1.493052),
        (44.827324, 4.490128, 12.307751),
        (44.827324, -4.490128, 12.307751),
        (50.193873, 4.490128, 8.913247),
        (50.193873, -4.490128, 8.913247),
        (-87.528449, -4.490128, 73.463514),
        (-87.528449, 4.490128, 73.463514),
        (-81.178449, 4.490128, 73.463514),
        (-81.178449, -4.490128, 73.463514),
    ]]
    fillet(f5_edges, radius=F5_R)

    # F6 (on face) → F7 (cut)
    with BuildSketch(Plane(origin=(-87.5284485418, 0, 0), x_dir=(0, -1, 0), z_dir=(-1, 0, 0))):
        with Locations((0, 65.7983862661)):
            Circle(F6_R)
        with Locations((0, 40.3983862661)):
            Circle(F6_R)
    extrude(amount=-F7_DEPTH, mode=Mode.SUBTRACT)


solid = f1.part
